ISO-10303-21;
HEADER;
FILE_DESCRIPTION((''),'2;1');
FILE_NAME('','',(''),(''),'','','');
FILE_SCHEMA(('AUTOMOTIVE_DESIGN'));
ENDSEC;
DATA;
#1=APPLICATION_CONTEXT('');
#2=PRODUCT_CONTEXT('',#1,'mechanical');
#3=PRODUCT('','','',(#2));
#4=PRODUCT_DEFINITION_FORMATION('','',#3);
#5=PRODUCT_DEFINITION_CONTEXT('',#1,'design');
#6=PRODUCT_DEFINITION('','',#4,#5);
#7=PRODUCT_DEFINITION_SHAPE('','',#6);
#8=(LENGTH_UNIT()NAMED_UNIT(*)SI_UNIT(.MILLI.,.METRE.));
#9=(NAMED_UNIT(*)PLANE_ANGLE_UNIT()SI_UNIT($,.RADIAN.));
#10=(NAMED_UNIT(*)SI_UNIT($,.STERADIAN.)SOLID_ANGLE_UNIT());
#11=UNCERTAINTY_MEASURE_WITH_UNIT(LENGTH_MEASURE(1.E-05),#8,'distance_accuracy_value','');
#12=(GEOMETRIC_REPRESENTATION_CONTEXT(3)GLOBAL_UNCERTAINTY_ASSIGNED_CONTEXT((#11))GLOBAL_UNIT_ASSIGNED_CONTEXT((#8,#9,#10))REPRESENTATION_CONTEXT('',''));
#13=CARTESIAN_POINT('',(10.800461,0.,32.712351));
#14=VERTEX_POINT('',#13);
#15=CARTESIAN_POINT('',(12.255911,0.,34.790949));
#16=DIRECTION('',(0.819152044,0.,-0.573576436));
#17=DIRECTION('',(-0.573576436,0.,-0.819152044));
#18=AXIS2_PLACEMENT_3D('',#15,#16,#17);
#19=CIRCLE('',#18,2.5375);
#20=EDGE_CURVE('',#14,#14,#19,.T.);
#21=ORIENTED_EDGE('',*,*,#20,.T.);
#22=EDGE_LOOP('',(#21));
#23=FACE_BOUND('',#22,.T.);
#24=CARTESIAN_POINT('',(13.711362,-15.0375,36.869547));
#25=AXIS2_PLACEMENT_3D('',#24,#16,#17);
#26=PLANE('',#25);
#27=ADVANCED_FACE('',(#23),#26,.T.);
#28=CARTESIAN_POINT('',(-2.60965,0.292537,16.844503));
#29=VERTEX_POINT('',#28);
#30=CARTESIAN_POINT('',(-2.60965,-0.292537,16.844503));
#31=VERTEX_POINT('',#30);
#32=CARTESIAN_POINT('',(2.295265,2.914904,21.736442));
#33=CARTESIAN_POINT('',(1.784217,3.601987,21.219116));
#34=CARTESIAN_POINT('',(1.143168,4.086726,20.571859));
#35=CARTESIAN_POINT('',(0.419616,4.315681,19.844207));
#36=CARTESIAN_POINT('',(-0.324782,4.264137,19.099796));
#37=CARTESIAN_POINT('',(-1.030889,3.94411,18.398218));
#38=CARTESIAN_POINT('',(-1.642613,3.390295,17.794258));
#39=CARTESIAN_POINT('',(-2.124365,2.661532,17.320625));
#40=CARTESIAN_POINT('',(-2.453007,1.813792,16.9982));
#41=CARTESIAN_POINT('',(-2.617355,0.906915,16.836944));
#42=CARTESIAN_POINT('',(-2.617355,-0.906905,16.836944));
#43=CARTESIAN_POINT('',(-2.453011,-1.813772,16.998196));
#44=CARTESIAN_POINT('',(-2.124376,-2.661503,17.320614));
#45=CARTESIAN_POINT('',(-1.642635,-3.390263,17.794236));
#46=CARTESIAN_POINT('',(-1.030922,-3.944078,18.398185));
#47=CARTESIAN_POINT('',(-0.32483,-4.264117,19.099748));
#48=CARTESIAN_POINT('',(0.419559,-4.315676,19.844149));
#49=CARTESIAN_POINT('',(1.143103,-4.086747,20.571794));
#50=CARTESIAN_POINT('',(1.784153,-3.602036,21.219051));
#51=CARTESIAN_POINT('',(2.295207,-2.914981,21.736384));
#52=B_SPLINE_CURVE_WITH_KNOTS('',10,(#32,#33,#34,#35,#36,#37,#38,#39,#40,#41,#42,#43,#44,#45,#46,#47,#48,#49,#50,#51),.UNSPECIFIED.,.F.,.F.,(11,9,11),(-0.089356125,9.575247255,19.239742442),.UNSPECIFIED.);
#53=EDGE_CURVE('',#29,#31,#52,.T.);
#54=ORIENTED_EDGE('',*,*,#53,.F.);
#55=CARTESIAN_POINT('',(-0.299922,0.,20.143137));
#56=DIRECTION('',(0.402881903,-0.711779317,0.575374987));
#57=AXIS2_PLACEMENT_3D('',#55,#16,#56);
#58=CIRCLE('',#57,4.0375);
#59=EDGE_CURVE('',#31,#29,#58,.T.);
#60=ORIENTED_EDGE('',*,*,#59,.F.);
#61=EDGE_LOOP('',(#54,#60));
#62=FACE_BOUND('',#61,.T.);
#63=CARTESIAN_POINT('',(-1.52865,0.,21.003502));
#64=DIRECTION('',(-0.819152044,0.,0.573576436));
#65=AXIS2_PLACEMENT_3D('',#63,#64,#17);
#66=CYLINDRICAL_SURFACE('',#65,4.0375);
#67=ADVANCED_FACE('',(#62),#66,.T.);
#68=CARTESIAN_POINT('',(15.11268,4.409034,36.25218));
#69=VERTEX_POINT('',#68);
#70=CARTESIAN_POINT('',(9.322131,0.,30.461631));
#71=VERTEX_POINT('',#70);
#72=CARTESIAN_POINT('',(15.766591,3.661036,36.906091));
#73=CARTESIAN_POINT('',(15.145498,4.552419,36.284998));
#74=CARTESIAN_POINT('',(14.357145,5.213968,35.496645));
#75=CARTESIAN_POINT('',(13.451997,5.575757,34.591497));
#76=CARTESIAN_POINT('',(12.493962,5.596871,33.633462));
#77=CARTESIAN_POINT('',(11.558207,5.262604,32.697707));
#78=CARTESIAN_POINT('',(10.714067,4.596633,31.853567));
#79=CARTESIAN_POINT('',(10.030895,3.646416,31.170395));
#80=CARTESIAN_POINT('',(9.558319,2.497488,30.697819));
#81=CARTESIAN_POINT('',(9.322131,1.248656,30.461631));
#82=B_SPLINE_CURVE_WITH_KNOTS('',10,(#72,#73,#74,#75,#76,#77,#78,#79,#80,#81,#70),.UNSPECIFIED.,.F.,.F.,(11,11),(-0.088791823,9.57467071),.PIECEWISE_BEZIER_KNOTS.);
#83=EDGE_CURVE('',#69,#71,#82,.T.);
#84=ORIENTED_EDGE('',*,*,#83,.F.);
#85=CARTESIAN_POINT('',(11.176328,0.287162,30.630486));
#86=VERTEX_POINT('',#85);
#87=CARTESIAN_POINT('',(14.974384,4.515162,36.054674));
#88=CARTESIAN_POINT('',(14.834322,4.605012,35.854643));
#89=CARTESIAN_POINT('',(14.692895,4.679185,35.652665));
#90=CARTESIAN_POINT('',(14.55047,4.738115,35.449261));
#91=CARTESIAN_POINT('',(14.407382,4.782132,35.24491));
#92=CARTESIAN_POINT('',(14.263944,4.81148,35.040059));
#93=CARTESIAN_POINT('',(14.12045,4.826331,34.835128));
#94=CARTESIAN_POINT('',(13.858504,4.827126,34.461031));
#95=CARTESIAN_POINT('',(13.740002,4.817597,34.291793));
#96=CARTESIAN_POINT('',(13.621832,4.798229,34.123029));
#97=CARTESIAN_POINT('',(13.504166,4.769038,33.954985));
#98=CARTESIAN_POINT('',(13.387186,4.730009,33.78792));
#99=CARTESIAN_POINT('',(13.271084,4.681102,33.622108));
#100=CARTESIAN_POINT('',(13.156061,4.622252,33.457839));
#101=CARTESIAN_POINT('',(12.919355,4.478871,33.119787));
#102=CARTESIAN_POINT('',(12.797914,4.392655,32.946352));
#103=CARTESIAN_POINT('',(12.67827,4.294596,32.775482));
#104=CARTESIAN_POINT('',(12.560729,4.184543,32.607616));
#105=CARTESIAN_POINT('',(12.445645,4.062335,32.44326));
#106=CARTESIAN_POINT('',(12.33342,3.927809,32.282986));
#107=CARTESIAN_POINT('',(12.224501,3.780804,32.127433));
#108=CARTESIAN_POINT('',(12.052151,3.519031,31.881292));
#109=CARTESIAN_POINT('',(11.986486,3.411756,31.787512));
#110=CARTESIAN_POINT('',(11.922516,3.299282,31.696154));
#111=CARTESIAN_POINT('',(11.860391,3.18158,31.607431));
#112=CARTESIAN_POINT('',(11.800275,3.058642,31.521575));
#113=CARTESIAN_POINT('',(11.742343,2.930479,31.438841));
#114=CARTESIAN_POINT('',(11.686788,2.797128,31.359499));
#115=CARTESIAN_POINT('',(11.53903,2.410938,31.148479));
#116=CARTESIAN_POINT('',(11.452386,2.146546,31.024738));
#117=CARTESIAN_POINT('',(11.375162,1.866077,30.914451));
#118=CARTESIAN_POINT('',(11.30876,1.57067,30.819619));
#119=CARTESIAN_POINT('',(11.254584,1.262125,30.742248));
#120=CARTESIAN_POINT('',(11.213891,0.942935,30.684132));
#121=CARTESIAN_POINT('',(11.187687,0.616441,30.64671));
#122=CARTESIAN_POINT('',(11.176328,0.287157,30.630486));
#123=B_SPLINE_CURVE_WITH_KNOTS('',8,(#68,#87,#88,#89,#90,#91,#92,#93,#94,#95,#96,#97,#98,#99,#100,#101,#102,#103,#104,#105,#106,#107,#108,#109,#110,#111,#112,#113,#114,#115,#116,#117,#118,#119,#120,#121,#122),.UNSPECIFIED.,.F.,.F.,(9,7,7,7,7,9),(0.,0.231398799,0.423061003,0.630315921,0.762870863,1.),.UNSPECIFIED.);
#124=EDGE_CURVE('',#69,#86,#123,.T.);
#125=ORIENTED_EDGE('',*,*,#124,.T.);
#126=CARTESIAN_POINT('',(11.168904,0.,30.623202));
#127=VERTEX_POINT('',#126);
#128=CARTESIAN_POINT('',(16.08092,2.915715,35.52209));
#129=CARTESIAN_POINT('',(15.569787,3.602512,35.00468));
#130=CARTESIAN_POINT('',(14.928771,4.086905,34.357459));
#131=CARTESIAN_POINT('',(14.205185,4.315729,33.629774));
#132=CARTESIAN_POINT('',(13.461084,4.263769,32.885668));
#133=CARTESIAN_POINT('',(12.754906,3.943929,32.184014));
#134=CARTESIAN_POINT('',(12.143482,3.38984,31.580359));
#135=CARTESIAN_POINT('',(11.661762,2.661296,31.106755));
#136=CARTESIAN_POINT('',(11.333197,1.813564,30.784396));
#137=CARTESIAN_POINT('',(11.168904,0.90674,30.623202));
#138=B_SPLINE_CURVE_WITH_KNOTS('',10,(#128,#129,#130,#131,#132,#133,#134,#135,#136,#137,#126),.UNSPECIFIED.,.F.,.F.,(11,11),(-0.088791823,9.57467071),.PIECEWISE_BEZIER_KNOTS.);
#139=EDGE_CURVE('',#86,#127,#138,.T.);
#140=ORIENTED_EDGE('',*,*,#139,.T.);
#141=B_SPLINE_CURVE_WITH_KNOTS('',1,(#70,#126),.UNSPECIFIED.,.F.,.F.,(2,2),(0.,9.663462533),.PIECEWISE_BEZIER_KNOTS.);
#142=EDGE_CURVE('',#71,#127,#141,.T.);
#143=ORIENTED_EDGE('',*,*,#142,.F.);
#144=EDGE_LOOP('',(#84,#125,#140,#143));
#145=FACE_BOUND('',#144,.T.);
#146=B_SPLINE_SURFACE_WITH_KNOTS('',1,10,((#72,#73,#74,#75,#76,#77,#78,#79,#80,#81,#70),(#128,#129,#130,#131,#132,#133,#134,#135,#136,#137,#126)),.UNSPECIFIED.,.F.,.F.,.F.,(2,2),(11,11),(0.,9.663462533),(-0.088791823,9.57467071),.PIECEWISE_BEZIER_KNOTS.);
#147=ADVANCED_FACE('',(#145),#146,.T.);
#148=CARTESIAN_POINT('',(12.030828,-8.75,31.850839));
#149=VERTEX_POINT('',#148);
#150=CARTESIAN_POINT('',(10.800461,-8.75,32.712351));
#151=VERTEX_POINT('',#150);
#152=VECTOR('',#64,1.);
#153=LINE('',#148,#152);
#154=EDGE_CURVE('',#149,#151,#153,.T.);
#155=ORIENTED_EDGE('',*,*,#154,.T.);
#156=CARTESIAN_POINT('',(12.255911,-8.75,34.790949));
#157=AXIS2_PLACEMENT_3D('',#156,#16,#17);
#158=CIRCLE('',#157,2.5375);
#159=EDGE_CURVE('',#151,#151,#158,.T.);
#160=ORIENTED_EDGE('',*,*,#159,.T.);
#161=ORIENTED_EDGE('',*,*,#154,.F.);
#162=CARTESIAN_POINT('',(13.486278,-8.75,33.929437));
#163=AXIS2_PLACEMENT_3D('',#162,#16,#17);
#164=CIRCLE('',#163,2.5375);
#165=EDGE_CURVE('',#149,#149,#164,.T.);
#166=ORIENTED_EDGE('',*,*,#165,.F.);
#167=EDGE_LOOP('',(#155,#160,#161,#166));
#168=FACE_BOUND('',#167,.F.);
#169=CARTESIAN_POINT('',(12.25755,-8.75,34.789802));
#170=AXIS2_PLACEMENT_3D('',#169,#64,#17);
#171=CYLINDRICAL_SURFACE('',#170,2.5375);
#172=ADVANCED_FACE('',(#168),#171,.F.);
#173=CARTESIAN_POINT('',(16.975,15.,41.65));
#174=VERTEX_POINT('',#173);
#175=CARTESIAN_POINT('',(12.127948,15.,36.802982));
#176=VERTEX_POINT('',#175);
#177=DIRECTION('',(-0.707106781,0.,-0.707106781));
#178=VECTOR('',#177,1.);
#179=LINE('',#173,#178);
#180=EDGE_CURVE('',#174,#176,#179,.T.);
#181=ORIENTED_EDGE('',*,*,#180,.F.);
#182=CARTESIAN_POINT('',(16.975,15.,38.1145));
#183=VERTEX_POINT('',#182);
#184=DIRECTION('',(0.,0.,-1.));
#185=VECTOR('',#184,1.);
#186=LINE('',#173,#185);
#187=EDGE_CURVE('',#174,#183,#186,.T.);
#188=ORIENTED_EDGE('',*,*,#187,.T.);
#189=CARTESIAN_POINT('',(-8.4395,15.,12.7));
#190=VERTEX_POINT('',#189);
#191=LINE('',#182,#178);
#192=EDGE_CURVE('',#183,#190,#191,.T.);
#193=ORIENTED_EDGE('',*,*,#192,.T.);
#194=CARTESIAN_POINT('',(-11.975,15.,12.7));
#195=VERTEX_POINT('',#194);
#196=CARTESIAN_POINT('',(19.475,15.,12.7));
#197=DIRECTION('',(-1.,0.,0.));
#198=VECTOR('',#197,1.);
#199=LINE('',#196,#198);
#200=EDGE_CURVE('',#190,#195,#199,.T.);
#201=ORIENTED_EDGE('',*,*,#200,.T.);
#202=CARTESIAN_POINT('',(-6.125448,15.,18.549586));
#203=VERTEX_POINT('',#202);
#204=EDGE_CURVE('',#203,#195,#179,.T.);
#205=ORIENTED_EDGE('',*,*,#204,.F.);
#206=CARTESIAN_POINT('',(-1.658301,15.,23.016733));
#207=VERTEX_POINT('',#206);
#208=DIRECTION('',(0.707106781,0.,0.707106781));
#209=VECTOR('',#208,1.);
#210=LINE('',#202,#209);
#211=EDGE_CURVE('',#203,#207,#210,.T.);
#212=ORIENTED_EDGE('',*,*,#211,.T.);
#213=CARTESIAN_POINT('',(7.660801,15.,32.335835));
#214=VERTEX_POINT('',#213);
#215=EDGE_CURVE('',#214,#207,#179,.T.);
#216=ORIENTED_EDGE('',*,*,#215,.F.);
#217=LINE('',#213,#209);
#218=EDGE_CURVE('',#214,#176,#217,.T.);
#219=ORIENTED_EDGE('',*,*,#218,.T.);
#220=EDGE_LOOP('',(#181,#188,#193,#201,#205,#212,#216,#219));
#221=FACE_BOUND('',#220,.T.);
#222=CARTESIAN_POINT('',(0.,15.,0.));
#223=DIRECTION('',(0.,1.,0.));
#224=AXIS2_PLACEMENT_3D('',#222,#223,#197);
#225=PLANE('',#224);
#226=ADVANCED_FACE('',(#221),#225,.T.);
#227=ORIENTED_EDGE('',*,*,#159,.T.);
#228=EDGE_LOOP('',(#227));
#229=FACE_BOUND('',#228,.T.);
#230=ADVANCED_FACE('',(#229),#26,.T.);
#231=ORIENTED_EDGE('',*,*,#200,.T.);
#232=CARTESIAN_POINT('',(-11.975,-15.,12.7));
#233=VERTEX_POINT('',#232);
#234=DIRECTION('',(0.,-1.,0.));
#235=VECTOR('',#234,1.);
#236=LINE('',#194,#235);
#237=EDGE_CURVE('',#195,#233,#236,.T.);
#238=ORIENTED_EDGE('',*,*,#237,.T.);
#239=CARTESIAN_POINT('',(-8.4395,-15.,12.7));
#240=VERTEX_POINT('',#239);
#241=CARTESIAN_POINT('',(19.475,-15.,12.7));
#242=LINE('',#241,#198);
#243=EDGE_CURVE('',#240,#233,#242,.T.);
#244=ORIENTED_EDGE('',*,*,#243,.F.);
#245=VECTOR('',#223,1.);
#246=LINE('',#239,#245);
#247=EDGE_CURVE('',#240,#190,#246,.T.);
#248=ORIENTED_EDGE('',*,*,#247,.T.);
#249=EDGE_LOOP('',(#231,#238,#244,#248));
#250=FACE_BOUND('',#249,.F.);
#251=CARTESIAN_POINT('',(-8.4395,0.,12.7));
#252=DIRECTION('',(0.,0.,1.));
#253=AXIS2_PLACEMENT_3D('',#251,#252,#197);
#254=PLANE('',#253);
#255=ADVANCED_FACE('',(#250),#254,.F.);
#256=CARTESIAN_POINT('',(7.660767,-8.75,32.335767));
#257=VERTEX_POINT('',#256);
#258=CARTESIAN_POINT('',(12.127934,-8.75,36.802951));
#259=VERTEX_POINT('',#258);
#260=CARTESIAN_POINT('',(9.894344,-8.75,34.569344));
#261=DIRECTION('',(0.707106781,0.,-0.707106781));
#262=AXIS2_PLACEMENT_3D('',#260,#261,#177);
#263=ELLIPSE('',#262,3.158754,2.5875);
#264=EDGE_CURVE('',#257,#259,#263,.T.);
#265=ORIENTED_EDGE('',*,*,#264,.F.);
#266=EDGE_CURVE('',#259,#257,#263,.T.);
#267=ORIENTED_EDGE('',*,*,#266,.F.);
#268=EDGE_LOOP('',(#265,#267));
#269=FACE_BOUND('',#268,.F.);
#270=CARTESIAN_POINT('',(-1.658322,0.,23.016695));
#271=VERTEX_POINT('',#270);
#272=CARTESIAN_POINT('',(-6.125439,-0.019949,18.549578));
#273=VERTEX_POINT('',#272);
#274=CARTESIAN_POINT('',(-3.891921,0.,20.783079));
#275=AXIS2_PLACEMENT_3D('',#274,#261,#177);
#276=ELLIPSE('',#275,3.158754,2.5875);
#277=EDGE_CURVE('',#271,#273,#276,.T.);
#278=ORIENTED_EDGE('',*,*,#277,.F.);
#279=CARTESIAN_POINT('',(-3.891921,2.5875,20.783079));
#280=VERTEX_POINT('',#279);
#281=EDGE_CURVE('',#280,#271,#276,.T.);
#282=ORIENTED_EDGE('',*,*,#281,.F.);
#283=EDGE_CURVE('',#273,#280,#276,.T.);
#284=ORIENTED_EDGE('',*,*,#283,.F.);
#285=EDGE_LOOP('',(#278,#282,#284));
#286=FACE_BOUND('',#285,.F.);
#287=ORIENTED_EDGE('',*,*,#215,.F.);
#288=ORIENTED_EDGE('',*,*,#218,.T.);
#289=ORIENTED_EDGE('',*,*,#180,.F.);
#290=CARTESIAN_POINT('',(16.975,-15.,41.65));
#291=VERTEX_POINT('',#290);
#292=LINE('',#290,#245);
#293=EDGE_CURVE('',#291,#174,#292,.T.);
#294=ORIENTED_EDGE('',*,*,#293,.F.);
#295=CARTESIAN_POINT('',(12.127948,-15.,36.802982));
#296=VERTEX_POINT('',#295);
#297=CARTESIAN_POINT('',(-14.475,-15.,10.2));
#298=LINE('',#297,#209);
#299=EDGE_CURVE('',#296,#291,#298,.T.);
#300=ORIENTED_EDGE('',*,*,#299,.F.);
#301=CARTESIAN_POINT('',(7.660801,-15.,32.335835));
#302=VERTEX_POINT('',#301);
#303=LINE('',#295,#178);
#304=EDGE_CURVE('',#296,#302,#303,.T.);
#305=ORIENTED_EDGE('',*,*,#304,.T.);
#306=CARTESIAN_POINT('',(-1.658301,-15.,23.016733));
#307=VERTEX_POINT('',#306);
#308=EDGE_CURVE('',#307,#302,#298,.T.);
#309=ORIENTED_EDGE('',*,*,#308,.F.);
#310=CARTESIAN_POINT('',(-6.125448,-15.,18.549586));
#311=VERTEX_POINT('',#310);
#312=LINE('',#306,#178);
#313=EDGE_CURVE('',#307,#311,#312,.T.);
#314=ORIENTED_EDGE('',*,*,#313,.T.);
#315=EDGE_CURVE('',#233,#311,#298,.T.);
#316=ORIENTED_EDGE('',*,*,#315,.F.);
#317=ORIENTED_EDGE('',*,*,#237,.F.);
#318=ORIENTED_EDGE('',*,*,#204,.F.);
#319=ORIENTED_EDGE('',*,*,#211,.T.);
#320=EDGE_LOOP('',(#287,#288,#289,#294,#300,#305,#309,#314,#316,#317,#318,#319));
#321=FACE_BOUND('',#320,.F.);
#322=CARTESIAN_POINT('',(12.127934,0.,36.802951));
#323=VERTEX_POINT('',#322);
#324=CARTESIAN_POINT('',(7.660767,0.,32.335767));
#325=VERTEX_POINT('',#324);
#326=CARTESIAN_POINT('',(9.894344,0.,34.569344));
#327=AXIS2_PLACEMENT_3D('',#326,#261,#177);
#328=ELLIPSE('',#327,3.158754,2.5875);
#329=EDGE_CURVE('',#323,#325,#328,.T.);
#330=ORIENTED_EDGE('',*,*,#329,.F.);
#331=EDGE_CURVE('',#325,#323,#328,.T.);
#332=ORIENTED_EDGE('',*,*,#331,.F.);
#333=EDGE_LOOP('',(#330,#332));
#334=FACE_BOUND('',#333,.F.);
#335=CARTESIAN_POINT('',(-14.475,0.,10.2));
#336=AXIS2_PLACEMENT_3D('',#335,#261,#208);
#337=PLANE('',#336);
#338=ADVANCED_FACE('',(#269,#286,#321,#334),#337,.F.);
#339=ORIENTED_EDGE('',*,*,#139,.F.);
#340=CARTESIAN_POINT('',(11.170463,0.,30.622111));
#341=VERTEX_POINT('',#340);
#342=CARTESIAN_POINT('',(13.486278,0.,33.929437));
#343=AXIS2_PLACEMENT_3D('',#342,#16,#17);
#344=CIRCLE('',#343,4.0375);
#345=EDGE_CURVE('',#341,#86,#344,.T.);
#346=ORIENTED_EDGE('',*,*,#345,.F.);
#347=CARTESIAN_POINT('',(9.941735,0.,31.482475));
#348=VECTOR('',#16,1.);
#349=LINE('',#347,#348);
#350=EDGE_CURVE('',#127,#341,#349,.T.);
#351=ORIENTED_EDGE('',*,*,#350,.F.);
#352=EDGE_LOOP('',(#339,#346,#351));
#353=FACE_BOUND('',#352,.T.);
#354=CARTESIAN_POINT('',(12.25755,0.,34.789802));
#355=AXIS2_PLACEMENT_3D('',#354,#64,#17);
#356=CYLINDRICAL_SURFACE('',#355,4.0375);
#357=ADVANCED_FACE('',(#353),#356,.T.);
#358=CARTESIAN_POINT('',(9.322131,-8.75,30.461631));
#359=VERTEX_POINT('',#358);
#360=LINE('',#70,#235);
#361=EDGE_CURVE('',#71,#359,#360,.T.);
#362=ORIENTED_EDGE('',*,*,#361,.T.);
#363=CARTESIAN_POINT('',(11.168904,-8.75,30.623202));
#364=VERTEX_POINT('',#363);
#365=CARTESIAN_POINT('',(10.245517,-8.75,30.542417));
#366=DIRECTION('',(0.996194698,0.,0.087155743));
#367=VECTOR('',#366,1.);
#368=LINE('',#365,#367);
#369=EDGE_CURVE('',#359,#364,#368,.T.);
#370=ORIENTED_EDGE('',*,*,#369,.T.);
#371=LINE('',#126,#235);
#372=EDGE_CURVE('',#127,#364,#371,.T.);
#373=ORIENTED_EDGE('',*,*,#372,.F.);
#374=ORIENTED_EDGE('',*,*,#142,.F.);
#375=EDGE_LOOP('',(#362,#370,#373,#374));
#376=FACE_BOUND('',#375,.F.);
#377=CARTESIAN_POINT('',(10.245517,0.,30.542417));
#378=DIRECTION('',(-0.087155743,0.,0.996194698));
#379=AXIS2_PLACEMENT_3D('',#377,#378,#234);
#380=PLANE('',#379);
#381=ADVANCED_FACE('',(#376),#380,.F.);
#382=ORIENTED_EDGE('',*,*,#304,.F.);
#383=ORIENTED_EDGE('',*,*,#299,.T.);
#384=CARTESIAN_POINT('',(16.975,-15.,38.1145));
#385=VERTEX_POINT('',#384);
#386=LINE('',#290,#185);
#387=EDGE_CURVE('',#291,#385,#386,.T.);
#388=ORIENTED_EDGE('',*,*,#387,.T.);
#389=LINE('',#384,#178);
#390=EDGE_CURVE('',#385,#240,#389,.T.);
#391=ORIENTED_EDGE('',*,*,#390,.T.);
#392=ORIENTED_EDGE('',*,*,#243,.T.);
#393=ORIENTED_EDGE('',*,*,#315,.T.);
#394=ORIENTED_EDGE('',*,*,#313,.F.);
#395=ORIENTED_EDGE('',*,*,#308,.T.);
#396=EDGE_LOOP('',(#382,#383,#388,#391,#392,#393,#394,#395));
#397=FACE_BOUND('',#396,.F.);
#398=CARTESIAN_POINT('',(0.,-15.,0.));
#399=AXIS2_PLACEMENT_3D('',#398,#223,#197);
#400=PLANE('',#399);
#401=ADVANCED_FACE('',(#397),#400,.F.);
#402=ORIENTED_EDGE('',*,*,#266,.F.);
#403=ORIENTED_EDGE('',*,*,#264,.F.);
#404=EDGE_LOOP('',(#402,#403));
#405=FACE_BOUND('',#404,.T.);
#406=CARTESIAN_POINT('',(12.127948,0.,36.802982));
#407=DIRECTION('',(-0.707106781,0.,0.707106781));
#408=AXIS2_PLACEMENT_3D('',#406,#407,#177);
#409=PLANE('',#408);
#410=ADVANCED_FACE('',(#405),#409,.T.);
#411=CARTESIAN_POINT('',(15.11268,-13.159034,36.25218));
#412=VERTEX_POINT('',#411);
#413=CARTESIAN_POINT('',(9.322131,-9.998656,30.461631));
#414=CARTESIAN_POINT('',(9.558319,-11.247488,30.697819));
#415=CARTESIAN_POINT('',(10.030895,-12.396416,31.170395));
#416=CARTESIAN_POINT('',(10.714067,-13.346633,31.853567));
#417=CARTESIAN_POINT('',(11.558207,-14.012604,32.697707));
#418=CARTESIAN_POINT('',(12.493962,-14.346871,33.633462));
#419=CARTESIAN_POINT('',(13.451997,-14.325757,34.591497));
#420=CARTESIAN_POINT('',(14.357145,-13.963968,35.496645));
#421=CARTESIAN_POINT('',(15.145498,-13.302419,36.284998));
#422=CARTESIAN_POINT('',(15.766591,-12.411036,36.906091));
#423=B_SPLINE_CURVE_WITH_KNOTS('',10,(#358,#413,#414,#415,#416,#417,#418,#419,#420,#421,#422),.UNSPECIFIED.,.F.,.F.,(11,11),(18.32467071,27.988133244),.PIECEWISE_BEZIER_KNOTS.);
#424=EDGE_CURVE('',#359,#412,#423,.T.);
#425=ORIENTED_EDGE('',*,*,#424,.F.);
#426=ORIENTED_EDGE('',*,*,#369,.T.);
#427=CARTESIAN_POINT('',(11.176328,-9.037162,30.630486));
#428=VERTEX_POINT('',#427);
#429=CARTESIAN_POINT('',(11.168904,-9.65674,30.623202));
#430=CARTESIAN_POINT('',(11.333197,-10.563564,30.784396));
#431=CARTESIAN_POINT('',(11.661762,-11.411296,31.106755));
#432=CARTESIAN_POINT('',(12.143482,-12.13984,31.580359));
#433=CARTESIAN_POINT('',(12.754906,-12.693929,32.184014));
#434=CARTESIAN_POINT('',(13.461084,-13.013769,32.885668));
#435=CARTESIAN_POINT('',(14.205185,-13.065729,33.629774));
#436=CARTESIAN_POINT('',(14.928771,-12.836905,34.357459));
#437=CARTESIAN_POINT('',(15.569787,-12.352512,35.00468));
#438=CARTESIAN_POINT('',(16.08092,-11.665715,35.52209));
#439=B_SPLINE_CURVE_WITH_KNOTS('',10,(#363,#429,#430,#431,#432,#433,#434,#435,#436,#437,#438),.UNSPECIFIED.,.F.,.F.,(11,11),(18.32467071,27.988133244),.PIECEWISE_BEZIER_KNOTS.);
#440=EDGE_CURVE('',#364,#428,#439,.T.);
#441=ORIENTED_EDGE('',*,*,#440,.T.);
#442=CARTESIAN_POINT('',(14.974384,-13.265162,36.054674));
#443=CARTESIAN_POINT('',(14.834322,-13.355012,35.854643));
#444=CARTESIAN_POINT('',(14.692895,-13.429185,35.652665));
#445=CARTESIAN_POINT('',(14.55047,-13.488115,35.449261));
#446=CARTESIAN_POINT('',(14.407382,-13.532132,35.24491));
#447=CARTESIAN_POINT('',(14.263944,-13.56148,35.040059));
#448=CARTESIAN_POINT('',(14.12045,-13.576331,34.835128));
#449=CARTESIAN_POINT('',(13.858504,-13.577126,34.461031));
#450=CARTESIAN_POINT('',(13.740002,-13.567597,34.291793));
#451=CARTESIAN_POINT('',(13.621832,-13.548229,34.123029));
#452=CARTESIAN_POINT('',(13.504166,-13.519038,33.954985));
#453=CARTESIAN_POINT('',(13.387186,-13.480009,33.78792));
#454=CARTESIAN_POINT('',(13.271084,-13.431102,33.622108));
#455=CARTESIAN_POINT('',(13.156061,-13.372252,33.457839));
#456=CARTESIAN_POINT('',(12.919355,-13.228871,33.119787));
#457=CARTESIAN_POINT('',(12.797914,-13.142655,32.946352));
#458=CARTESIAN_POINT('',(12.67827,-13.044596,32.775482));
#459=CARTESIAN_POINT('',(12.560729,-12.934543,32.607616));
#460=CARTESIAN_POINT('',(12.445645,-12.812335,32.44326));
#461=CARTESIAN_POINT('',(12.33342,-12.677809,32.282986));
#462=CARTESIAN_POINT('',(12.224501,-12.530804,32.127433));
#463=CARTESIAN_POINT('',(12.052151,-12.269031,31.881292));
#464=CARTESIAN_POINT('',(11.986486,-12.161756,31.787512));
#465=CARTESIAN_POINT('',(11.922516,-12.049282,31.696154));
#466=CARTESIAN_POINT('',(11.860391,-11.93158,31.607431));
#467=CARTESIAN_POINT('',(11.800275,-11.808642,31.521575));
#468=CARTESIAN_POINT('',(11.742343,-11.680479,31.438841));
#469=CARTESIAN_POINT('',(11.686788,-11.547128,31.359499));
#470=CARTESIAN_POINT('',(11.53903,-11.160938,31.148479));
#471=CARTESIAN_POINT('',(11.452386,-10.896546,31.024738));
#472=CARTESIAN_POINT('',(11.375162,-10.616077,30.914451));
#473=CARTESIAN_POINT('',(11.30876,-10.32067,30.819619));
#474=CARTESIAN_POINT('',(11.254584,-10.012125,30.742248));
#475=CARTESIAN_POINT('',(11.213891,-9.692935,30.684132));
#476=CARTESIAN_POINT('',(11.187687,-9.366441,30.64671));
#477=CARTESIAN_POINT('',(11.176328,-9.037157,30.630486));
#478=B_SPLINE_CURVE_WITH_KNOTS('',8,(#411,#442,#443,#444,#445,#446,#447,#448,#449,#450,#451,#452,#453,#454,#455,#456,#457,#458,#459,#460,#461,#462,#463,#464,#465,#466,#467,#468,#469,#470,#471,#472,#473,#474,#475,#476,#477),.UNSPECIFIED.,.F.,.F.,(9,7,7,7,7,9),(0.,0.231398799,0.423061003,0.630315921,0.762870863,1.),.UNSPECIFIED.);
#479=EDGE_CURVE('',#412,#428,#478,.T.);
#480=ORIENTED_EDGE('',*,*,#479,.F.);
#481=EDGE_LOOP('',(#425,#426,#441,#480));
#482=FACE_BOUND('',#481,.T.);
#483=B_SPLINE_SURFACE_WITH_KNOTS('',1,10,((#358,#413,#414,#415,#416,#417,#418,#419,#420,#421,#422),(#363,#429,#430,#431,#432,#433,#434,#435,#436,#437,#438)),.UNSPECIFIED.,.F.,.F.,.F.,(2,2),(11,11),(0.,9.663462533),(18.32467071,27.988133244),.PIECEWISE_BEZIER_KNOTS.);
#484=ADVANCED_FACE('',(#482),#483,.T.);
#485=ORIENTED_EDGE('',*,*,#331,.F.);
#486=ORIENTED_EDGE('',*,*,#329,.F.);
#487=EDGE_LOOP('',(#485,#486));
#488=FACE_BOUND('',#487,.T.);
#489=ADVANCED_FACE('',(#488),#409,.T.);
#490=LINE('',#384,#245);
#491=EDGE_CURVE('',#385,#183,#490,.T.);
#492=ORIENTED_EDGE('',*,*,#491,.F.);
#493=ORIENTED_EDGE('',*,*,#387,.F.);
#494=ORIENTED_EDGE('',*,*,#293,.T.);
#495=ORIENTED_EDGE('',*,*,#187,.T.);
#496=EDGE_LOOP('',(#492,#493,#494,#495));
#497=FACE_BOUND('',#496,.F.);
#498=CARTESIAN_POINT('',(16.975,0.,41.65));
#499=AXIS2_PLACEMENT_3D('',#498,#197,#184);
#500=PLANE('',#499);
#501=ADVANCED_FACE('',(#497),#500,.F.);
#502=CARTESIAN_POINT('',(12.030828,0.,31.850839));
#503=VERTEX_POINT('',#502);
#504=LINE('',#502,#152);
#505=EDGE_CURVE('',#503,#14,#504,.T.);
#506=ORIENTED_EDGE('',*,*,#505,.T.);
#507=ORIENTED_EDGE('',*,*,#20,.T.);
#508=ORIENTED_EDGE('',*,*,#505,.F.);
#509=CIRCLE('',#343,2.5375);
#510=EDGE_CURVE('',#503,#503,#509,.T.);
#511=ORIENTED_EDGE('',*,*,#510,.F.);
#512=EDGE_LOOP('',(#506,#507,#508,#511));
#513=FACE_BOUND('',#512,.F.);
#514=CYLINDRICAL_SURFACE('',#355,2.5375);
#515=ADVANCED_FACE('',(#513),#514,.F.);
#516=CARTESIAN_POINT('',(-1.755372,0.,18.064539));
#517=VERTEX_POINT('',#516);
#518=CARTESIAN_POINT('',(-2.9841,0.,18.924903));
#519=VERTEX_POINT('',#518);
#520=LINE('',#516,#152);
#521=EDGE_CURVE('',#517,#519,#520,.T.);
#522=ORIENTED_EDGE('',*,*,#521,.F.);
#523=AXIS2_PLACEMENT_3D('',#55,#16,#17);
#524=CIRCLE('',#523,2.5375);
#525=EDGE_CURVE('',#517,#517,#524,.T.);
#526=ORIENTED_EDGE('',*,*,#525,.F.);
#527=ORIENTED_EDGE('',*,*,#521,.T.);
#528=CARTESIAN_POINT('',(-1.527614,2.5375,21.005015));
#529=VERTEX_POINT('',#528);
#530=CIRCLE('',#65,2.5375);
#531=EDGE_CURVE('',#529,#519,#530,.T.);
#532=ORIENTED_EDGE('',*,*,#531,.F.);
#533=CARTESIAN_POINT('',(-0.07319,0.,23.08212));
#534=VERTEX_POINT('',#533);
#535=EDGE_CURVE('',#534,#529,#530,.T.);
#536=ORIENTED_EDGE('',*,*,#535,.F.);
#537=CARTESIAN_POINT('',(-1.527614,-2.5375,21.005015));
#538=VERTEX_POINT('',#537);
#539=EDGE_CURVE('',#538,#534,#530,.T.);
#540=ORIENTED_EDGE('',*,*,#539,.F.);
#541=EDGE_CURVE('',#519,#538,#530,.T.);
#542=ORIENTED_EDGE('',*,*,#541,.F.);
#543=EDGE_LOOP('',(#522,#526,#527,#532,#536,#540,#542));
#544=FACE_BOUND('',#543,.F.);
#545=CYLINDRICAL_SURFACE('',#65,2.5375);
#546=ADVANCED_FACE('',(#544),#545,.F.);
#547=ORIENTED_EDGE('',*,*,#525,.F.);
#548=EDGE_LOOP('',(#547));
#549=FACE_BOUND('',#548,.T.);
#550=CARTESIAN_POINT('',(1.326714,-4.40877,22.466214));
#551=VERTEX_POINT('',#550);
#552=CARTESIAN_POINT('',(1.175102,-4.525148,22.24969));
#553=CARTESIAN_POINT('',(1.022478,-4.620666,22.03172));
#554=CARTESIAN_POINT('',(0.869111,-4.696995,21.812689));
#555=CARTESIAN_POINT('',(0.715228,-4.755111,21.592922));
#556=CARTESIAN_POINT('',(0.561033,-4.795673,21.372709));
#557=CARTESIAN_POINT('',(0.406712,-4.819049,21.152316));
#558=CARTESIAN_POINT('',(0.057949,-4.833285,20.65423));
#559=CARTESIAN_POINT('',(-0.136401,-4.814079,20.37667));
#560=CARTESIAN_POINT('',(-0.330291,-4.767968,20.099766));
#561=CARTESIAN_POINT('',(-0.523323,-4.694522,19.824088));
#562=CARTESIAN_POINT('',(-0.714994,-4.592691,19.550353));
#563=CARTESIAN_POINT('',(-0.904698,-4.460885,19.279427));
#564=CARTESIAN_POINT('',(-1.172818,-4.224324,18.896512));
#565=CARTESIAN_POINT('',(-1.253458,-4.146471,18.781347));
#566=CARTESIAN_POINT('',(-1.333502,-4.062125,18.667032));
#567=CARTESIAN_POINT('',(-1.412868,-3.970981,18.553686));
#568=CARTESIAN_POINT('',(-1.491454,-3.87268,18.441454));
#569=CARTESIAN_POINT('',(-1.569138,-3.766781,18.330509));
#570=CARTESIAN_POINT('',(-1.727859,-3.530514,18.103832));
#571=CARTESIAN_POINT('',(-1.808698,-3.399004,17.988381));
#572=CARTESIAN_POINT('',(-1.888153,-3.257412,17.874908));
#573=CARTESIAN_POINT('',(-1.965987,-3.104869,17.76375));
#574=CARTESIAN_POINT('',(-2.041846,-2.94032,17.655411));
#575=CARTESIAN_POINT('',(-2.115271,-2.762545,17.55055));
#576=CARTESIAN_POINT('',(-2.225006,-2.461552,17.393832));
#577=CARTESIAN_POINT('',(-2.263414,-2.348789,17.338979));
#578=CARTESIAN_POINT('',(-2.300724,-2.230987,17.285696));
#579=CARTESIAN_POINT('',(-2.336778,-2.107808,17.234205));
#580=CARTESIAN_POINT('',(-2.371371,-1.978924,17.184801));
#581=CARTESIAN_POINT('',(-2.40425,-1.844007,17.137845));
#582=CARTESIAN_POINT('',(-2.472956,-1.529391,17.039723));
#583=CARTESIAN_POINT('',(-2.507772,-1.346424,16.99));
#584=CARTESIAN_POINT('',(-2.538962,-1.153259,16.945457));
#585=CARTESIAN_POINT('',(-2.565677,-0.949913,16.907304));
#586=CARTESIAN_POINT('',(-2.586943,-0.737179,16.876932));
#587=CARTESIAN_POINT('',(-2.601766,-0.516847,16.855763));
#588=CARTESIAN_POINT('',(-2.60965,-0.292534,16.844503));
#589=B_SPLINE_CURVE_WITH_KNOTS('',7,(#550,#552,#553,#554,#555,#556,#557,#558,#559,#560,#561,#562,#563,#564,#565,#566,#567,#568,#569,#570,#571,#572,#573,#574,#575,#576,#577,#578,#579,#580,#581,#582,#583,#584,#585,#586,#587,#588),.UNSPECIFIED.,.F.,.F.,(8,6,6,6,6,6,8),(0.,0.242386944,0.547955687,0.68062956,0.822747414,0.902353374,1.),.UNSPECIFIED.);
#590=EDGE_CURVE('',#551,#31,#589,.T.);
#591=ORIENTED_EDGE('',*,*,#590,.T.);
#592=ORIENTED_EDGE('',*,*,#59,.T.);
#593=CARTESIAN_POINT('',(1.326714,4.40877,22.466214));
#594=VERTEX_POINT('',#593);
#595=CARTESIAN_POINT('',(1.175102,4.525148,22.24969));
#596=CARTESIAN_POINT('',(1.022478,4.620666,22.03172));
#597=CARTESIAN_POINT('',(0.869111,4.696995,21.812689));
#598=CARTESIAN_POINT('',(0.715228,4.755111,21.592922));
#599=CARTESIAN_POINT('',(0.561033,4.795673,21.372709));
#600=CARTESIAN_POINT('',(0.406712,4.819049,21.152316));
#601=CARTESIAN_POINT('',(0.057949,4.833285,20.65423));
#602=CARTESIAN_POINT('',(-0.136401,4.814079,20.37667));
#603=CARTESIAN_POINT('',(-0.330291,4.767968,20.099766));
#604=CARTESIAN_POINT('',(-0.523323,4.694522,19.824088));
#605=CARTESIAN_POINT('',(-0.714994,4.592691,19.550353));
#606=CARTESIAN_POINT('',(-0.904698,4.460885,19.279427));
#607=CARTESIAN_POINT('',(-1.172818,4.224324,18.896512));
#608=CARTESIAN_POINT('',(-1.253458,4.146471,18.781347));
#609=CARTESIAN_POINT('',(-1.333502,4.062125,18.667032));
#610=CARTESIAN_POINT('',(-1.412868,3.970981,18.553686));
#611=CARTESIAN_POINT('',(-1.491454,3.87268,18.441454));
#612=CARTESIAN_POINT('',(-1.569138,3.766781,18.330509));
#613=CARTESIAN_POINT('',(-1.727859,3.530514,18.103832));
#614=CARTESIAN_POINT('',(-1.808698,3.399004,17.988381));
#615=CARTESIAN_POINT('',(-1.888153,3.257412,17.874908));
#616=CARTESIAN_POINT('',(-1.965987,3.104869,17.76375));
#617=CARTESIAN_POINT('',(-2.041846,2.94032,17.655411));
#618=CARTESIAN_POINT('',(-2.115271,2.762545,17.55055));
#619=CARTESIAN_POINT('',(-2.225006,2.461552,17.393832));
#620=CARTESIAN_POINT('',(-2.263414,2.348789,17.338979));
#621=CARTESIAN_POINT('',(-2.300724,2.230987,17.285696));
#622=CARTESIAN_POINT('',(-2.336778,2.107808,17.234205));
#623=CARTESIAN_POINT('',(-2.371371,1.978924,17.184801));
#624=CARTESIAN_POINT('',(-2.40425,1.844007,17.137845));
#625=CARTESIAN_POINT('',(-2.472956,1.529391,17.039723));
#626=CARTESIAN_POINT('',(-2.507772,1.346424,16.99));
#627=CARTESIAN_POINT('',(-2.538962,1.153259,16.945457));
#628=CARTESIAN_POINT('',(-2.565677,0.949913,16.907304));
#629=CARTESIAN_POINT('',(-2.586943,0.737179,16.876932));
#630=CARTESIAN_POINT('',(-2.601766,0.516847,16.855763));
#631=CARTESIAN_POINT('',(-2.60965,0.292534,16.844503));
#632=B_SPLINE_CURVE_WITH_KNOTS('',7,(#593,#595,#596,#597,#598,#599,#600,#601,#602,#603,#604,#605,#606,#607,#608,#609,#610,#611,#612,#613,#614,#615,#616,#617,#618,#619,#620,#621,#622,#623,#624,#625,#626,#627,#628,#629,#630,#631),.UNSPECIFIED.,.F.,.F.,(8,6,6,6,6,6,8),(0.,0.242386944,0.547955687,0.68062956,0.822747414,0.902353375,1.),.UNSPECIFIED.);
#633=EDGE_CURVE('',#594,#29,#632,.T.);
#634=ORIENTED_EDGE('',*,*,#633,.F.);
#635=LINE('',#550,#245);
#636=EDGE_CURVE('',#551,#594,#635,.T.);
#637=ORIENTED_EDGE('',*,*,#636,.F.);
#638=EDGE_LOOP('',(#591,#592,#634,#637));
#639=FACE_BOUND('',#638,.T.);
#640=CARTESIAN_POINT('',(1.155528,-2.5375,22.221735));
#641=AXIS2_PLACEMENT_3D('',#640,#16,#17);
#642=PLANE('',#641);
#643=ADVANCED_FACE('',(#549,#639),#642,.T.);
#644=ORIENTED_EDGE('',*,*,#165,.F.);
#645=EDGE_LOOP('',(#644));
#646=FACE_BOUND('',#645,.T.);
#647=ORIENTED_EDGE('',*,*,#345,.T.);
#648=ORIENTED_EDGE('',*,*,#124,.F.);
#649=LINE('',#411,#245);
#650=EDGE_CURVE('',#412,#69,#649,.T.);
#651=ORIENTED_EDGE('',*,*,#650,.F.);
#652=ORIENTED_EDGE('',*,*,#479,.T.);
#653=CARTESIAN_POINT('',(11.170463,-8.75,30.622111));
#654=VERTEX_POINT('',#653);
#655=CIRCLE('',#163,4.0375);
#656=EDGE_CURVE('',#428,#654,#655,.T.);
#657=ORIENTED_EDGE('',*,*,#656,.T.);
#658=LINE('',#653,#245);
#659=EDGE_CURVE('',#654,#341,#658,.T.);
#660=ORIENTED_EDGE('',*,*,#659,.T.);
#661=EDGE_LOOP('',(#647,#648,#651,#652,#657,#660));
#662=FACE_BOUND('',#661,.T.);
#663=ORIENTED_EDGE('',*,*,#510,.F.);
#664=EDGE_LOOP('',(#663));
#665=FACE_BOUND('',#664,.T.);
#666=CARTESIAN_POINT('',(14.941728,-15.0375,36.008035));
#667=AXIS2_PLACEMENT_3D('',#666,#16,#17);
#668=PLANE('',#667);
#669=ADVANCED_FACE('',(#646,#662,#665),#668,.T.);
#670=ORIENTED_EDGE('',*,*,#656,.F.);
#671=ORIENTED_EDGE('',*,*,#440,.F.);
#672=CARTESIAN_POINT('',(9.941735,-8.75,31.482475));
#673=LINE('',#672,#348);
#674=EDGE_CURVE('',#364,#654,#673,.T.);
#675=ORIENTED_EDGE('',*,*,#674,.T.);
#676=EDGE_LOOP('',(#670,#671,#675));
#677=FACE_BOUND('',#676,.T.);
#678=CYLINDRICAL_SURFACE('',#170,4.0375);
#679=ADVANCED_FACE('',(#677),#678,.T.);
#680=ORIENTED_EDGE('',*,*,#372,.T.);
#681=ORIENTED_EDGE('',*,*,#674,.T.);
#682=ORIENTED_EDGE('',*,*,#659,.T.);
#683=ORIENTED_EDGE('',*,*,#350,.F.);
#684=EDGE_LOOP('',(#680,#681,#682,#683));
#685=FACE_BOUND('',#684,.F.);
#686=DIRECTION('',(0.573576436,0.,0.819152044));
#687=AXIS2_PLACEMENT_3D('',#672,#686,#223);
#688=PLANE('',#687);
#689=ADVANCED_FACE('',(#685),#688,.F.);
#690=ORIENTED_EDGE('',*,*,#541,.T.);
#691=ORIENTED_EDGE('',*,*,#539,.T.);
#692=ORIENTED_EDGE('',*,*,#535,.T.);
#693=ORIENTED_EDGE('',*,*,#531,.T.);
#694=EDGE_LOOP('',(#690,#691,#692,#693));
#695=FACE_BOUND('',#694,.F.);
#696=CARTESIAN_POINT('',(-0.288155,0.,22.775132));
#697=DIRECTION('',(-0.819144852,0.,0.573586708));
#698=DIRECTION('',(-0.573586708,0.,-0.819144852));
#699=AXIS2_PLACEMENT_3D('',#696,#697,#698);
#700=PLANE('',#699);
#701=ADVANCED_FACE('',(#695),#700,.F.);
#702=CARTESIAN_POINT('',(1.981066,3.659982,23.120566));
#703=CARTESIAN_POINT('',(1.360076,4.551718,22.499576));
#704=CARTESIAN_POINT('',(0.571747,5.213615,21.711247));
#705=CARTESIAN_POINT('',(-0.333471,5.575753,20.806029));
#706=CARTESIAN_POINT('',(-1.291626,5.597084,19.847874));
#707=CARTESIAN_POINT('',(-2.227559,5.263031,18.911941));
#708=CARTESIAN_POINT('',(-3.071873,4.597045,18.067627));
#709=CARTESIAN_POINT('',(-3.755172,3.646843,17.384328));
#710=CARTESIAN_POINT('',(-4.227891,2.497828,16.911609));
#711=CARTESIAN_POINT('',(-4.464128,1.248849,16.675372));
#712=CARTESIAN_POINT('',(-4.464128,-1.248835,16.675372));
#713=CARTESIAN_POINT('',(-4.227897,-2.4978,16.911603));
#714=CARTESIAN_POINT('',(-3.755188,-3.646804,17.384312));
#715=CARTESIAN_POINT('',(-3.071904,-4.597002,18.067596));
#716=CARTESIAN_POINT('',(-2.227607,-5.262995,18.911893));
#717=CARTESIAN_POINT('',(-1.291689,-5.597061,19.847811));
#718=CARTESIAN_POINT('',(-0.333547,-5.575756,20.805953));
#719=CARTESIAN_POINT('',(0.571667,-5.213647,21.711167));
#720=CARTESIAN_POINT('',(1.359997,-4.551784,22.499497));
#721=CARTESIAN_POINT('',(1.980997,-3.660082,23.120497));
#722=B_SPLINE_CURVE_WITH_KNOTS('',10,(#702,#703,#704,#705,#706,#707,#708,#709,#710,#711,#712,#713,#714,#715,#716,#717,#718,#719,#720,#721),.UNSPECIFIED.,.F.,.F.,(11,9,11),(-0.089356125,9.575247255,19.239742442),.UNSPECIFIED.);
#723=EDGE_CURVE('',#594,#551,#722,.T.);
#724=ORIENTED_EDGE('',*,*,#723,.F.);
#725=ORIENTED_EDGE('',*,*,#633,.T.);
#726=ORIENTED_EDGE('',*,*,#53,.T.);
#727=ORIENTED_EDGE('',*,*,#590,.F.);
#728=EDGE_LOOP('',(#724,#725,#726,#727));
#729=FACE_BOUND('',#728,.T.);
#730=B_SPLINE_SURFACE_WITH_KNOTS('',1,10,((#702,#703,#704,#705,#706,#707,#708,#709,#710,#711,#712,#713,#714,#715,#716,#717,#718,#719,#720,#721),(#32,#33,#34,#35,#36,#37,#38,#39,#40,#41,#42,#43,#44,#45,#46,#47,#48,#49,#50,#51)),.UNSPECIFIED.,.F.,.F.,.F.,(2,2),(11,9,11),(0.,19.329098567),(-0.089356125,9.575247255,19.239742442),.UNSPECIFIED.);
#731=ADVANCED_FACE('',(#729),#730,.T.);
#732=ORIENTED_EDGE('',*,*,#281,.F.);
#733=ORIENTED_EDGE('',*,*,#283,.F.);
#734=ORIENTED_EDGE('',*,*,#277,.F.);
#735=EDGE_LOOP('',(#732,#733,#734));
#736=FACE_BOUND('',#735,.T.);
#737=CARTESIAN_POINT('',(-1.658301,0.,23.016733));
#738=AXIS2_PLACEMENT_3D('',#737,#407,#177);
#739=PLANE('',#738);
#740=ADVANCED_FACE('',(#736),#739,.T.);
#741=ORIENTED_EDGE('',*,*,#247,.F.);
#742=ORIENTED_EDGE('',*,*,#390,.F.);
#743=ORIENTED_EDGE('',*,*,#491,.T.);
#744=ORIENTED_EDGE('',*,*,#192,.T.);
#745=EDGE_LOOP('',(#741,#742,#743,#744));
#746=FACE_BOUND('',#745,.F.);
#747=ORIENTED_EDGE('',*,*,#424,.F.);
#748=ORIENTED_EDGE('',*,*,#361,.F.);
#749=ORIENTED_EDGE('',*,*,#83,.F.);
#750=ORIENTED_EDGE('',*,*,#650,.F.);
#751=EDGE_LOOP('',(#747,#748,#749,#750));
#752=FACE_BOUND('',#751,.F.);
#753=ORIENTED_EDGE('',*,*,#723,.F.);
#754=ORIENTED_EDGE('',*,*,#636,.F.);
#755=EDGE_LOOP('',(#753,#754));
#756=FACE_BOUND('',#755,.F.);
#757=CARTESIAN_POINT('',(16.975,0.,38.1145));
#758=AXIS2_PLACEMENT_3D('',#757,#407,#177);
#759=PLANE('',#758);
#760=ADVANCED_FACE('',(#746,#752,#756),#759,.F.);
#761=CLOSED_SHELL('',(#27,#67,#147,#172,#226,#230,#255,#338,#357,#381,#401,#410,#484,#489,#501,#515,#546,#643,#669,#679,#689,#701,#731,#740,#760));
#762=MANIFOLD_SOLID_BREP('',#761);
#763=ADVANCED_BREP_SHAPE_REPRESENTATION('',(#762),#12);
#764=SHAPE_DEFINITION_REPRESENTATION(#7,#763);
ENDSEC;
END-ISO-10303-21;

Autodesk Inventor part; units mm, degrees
ref_plane "YZ Plane" through (0, 0, 0) normal (1, 0, 0) x (0, 1, 0)
ref_plane "Work Plane1" through (-24.9, -24.9, 7.7) normal (0, 0, 1) x (1, 0, 0)
sketch "Sketch1" plane through (0, 0, 0) normal (0, 0, 1) x (0, 1, 0)
  circle A0 centre (20.9, 10) radius 1.875 projected
  circle A1 centre (-20.9, 10) radius 1.875 projected
  circle A2 centre (20.9, -10) radius 1.875 projected
  circle A3 centre (-20.9, -10) radius 1.875 projected
  circle A4 centre (-14.4, -20.8) radius 2.0675 projected
  circle A5 centre (14.4, -20.8) radius 2.0675 projected
  circle A6 centre (14.4, 20.8) radius 2.0675 projected
  circle A7 centre (-14.4, 20.8) radius 2.0675 projected
  line L0 (-16.9, -16.9) -> (-16.9, 16.9) projected
  line L1 (-16.9, 16.9) -> (16.9, 16.9) projected
  line L2 (16.9, 16.9) -> (16.9, -16.9) projected
  line L3 (16.9, -16.9) -> (-16.9, -16.9) projected
  line L4 (24.9, 17.05) -> (22.55, 17.05) projected
  line L5 (22.55, 17.05) -> (17.05, 22.55) projected
  line L6 (17.05, 22.55) -> (17.05, 24.9) projected
  line L7 (17.05, 24.9) -> (-17.05, 24.9) projected
  line L8 (-17.05, 24.9) -> (-17.05, 22.55) projected
  line L9 (-17.05, 22.55) -> (-22.55, 17.05) projected
  line L10 (-22.55, 17.05) -> (-24.9, 17.05) projected
  line L11 (-24.9, 17.05) -> (-24.9, -17.05) projected
  line L12 (-24.9, -17.05) -> (-22.55, -17.05) projected
  line L13 (-22.55, -17.05) -> (-17.05, -22.55) projected
  line L14 (-17.05, -22.55) -> (-17.05, -24.9) projected
  line L15 (-17.05, -24.9) -> (17.05, -24.9) projected
  line L16 (17.05, -24.9) -> (17.05, -22.55) projected
  line L17 (17.05, -22.55) -> (22.55, -17.05) projected
  line L18 (22.55, -17.05) -> (24.9, -17.05) projected
  line L19 (24.9, -17.05) -> (24.9, 17.05) projected
  line L20 (16.975, -24.825) -> (-16.975, -24.825)
  line L21 (-16.975, -24.825) -> (-16.975, -22.5189)
  line L22 (-16.975, -22.5189) -> (-22.5189, -16.975)
  line L23 (-22.5189, -16.975) -> (-24.825, -16.975)
  line L24 (-24.825, -16.975) -> (-24.825, 16.975)
  line L25 (-24.825, 16.975) -> (-22.5189, 16.975)
  line L26 (-22.5189, 16.975) -> (-16.975, 22.5189)
  line L27 (-16.975, 22.5189) -> (-16.975, 24.825)
  line L28 (-16.975, 24.825) -> (16.975, 24.825)
  line L29 (16.975, 24.825) -> (16.975, 22.5189)
  line L30 (16.975, 22.5189) -> (22.5189, 16.975)
  line L31 (22.5189, 16.975) -> (24.825, 16.975)
  line L32 (24.825, 16.975) -> (24.825, -16.975)
  line L33 (24.825, -16.975) -> (22.5189, -16.975)
  line L34 (22.5189, -16.975) -> (16.975, -22.5189)
  line L35 (16.975, -22.5189) -> (16.975, -24.825)
  dimension "d5" = 0.075
extrude "Extrusion1" add sketch "Sketch1" along normal blind 2.5 from surface at 7.7 contours A0 | A1 | A2 | A3 | A4 | A5 | A6 | A7 | L0 L1 L2 L3 | L20 L21 L22 L23 L24 L25 L26 L27 L28 L29 L30 L31 L32 L33 L34 L35
sketch "Sketch2" plane through (0, 0, 0) normal (0, 1, 0) x (-1, 0, 0)
  line L0 (16.975, 10.2) -> (-16.975, 10.2) projected
  line L1 (-16.975, 7.7) -> (-16.975, 10.2) projected
  line L2 (16.975, 7.7) -> (-16.975, 7.7) projected
  line L3 (16.975, 7.7) -> (16.975, 10.2) projected
  line L4 (16.975, 7.7) -> (-16.975, 41.65)
  line L5 (16.975, 7.7) -> (64.9876, 7.7) construction
  line L6 (-16.975, 41.65) -> (-16.975, 10.2)
  line L7 (-20.5105, 41.65) -> (10.9395, 10.2)
  line L8 (7.4039, 10.2) -> (-24.0461, 41.65)
  line L9 (-19.475, 12.7) -> (19.475, 12.7)
  line L10 (19.475, 12.7) -> (19.475, 5.2)
  line L11 (19.475, 5.2) -> (-19.475, 5.2)
  line L12 (-19.475, 5.2) -> (-19.475, 12.7)
  line L13 (-16.975, 41.65) -> (-24.825, 41.65)
  line L14 (-24.825, 41.65) -> (-24.825, 10.2)
  line L15 (-24.825, 10.2) -> (-16.975, 10.2)
  line L16 (-16.975, 10.2) -> (-16.975, 41.65)
  point P0 (0, 0)
  point P1 (14.475, 10.2)
  point P2 (-16.975, 38.1145)
  point P3 (-16.975, 34.5789)
  point P4 (8.4395, 12.7)
  point P5 (11.975, 12.7)
  point P6 (-19.475, 10.2)
  point P7 (-16.975, 12.7)
  point P8 (-16.975, 10.2)
  dimension "d6" = 135
  dimension "d9" = 2.5
  dimension "d10" = 2.5
  dimension "d13" = 2.5
extrude "Extrusion2" add sketch "Sketch2" along normal mid plane 30 contours L7 L9 L4 L0 | L0 L8 L9 L7 | L0 L6 L9 L8 | L9 L8 L6 L7 | L7 L6 L4 L9 | L15 L12 L9 L6 | L9 L6 L8 | L7 L13 L6 | L6 L8 L13 L7 | L9 L12 L15 L14 L13 L8 L6
extrude "Extrusion3" cut sketch "Sketch2" along normal mid plane 30 contours L7 L9 L4 L0 | L0 L8 L9 L7 | L9 L8 L6 L7 | L7 L13 L6 | L6 L8 L13 L7
ref_plane "Work Plane2" through (24.825, 0, 41.65) normal (0.9848078, 0, -0.1736482) x (0, 1, 0)
sketch "Sketch3" plane through (20.7643, -15, 18.6207) normal (0.9848078, 0, -0.1736482) x (-0.1736482, 0, -0.9848078)
  line L0 (10.902, 0) -> (-18.5396, 0) projected
  line L1 (10.902, 0) -> (10.902, 30) projected
  line L2 (-18.5396, 30) -> (10.902, 30) projected
  line L3 (-18.5396, 15) -> (10.902, 15)
  line L4 (6.1812, 6.25) -> (-13.8188, 6.25)
  line L5 (-13.8188, 6.25) -> (-13.8188, 23.75)
  line L6 (-13.8188, 23.75) -> (6.1812, 23.75)
  line L7 (6.1812, 23.75) -> (6.1812, 6.25)
  line L8 (6.1812, 6.25) -> (-13.8188, 23.75) construction
  line L9 (-13.8188, 6.25) -> (6.1812, 23.75) construction
  circle A0 centre (-13.8188, 6.25) radius 2.5875
  circle A1 centre (-13.8188, 6.25) radius 5.0875
  line L10 (-3.8188, 15) -> (-3.8188, 6.25)
  line L11 (-3.8188, 10.625) -> (-13.8188, 10.625)
  line L12 (-8.8188, 10.625) -> (-8.8188, 6.25)
  circle A2 centre (-13.8188, 15) radius 2.5875
  circle A3 centre (-13.8188, 15) radius 5.0875
  circle A4 centre (-3.8188, 15) radius 5.0875
  circle A5 centre (-3.8188, 15) radius 2.5875
  line L13 (-18.9063, 6.25) -> (-18.9063, 15)
  line L14 (-8.7313, 15) -> (-8.7313, 6.25)
  line L15 (-18.5396, 0) -> (-18.5396, 30) projected
  point P0 (21.9435, 15)
  dimension "d16" = 20
  dimension "d17" = 17.5
  dimension "d18" = 5.175
  dimension "d19" = 2.5
extrude "Extrusion4" cut sketch "Sketch3" along normal mid plane 50 contours A0 L5 L4 | L4 L5 A0 | A2 L3 L5 | L5 L3 A2 | A2 L5 L3 | A2 L3 L5
extrude "Extrusion5" cut sketch "Sketch3" along normal blind 4.25 and the other way blind 2.5 contours L15 A1 A3 L5 A0 L4 | A1 L15 | L13 A3 L15 A1 | L4 L12 A1 | A1 L12 L11 L14 | L15 A3 A1 | A3 L15 | L4 A0 L5 A3 A1 L12 | A1 L11 L12 | L11 A3 A4 L14 | A3 L15 L3 A2 L5 A1 | A1 L5 A3 | A3 L5 A2 L3 L15 | A4 L3 A2 L5 A3 | A3 L3 A4 | A0 L5 L4 | L4 L5 A0 | L11 L5 A1 | A3 L5 L11 | A1 L5 A2 L3 A4 A3 | A4 A3 L14 | A3 A4 L3 | A2 L3 L5 | L5 L3 A2 | A2 L5 L3 | A2 L3 L5
sketch "Sketch4" plane through (17.8921, 0, 2.3313) normal (0.9848078, 0, -0.1736482) x (0, 1, 0)
  line L0 (-15, 5.6387) -> (-15, 35.0803) projected
  line L1 (-15, 5.6387) -> (15, 5.6387) projected
  line L2 (15, 35.0803) -> (15, 5.6387) projected
  circle A0 centre (0, 14.3887) radius 2.5875
  circle A1 centre (0, 14.3887) radius 5.0875
  line L3 (-15, 35.0803) -> (15, 35.0803) projected
  line L4 (0, 5.6387) -> (0, 14.3887)
  point P0 (0, -5.1645)
  dimension "d25" = 5.175
  dimension "d26" = 2.5
  dimension "d37" = 8.75
extrude "Extrusion6" cut sketch "Sketch4" along normal mid plane 100 contours A0
extrude "Extrusion7" cut sketch "Sketch4" along normal blind 15 and the other way blind 10 contours A0 | A1
sketch "Sketch7" plane through (-3.5875, 0, 17.552) normal (0, 1, 0) x (-0.7071068, 0, -0.7071068)
  line L0 (-20.158, 0) -> (-26.4755, 0) projected
  line L1 (-0.6613, 0) -> (-6.9788, 0) projected
  line L2 (1.0892, 2.5) -> (-0.6613, 0) projected
  line L3 (-5.2283, 2.5) -> (1.0892, 2.5) projected
  line L4 (-5.2283, 2.5) -> (-6.9788, 0) projected
  line L5 (-18.4075, 2.5) -> (-20.158, 0) projected
  line L6 (-24.725, 2.5) -> (-18.4075, 2.5) projected
  line L7 (-24.725, 2.5) -> (-26.4755, 0) projected
  line L8 (-3.8201, 0) -> (-4.0701, 0)
  line L9 (-23.3168, 0) -> (-23.5668, 0)
  line L10 (-1.7448, -1.4254) -> (-6.7427, -0.5442)
  line L11 (-6.7427, -0.5442) -> (-6.3954, 1.4254)
  line L12 (-6.3954, 1.4254) -> (-1.3975, 0.5442)
  line L13 (-1.3975, 0.5442) -> (-1.7448, -1.4254)
  line L14 (-1.7448, -1.4254) -> (-6.3954, 1.4254) construction
  line L15 (-6.7427, -0.5442) -> (-1.3975, 0.5442) construction
  line L16 (-1.7448, -1.4254) -> (3.3302, -1.4254) construction
  line L17 (-21.2415, -1.4254) -> (-26.2394, -0.5442)
  line L18 (-26.2394, -0.5442) -> (-25.8921, 1.4254)
  line L19 (-25.8921, 1.4254) -> (-20.8942, 0.5442)
  line L20 (-20.8942, 0.5442) -> (-21.2415, -1.4254)
  line L21 (-21.2415, -1.4254) -> (-25.8921, 1.4254) construction
  line L22 (-26.2394, -0.5442) -> (-20.8942, 0.5442) construction
  line L23 (-21.2415, -1.4254) -> (-16.1665, -1.4254) construction
  line L24 (-27.1088, 3.1631) -> (-27.9771, -1.7609)
  line L25 (-27.9771, -1.7609) -> (-20.0247, -3.1631)
  line L26 (-20.0247, -3.1631) -> (-19.1565, 1.7609)
  line L27 (-19.1565, 1.7609) -> (-27.1088, 3.1631)
  line L28 (-7.6121, 3.1631) -> (-8.4804, -1.7609)
  line L29 (-8.4804, -1.7609) -> (-0.528, -3.1631)
  line L30 (-0.528, -3.1631) -> (0.3402, 1.7609)
  line L31 (0.3402, 1.7609) -> (-7.6121, 3.1631)
  line L32 (-0.6613, 0) -> (0.0297, 0)
  line L33 (-20.158, 0) -> (-19.467, 0)
  line L34 (-1.7448, -1.4254) -> (0.0297, 0)
  line L35 (-21.2415, -1.4254) -> (-19.467, 0)
  line L36 (-26.4755, 0) -> (-27.6666, 0)
  line L37 (-6.9788, 0) -> (-8.1699, 0)
  line L38 (-6.7427, -0.5442) -> (-8.1699, 0)
  line L39 (-26.2394, -0.5442) -> (-27.6666, 0)
  point P0 (-1.4934, 0)
  point P1 (-6.6467, 0)
  point P2 (-26.1434, 0)
  point P3 (-20.9901, 0)
  dimension "d70" = 0.25
  dimension "d71" = 0.25
  dimension "d72" = 5.075
  dimension "d73" = 170
  dimension "d74" = 2
  dimension "d75" = 5.075
  dimension "d76" = 170
  dimension "d77" = 2
  dimension "d78" = 1.5
  dimension "d79" = 1.5
extrude "Extrusion10" add sketch "Sketch7" along normal mid plane 30 contours L0 L18 L7 L19 L20 | L20 L19 L7 L6 L27 L26 L5 L0 | L0 L7 L18 | L26 L27 L6 L5 | L1 L11 L4 L12 L13 | L13 L12 L4 L3 L31 L30 L2 L1 | L1 L4 L11 | L30 L31 L3 L2
extrude "Extrusion11" cut sketch "Sketch7" along normal mid plane 5.075 contours L0 L20 L17 L18 | L0 L18 L7 L19 L20 | L18 L19 L7 | L1 L13 L10 L11 | L1 L11 L4 L12 L13 | L11 L12 L4
sketch "Sketch8" plane through (13.713, -15.0375, 36.8684) normal (0.819152, 0, -0.5735764) x (-0.5735764, 0, -0.819152)
  line L0 (0, 12.5) -> (0, 17.575) projected
  line L1 (5.075, 17.575) -> (5.075, 12.5) projected
  line L2 (0, 12.5) -> (5.075, 12.5) projected
  line L3 (5.075, 17.575) -> (0, 17.575) projected
  line L4 (2.5375, 12.5) -> (2.5375, 17.575)
  circle A0 centre (2.5375, 15.0375) radius 2.5375
  circle A1 centre (2.5375, 15.0375) radius 4.0375
  circle A2 centre (2.5375, 6.2875) radius 4.0375
  circle A3 centre (2.5375, 6.2875) radius 2.5375
  line L5 (-1.5, 6.2875) -> (-1.5, 15.0375)
  line L6 (6.575, 6.2875) -> (6.575, 15.0375)
  point P0 (38.0663, 15.0375)
  dimension "d86" = 5.075
  dimension "d87" = 1.5
  dimension "d90" = 8.75
extrude "Extrusion12" cut sketch "Sketch8" along normal blind 1.5 contours A0 L4 | L4 A0 | A3
extrude "Extrusion13" add sketch "Sketch8" along normal blind 1.5 contours L0 A0 L2 | L0 L3 A0 | A0 L1 L2 | L3 L1 A0 | A1 | L6 A2 L5 A1 | A2
sketch "Sketch9" plane through (-0.0732, -2.5375, 23.0821) normal (0.819152, 0, -0.5735764) x (-0.5735764, 0, -0.819152)
  line L0 (0, 0) -> (0, 5.075) projected
  line L1 (0, 0) -> (5.075, 0) projected
  line L2 (5.075, 5.075) -> (5.075, 0) projected
  line L3 (5.075, 5.075) -> (0, 5.075) projected
  line L4 (2.5375, 0) -> (2.5375, 5.075)
  circle A0 centre (2.5375, 2.5375) radius 2.5375
  circle A1 centre (2.5375, 2.5375) radius 4.0375
  point P0 (18.8658, 2.5375)
  dimension "d99" = 5.075
  dimension "d100" = 1.5
extrude "Extrusion14" add sketch "Sketch9" along normal blind 1.5 contours L0 A0 L1 | L0 L3 A0 | A0 L2 L1 | L3 L2 A0 | A1
chamfer "Chamfer1" distance 1.21 angle 45 3 edges at (11.9583, -12.4749, 33.0978) (-1.8279, 3.7249, 19.3115) (-1.8279, -3.7249, 19.3115)
sketch "Sketch10" plane through (0, 0, 0) normal (0, 1, 0) x (-1, 0, 0)
  line L0 (8.4395, 12.7) -> (-16.975, 38.1145) projected
  line L1 (-16.975, 38.1145) -> (-16.975, 41.65) projected
  line L2 (-16.975, 41.65) -> (11.975, 12.7) projected
  line L3 (11.975, 12.7) -> (8.4395, 12.7) projected
  line L4 (-11.1764, 30.6305) -> (-15.1128, 36.2522) projected
  line L5 (-11.1689, 30.6232) -> (-11.1764, 30.6305) projected
  line L6 (-15.1128, 36.2522) -> (-9.3221, 30.4616) projected
  line L7 (-1.3265, 22.466) -> (2.6099, 16.8443) projected
  line L8 (2.6099, 16.8443) -> (2.6099, 16.8443) projected
  line L9 (2.6099, 16.8443) -> (-1.3265, 22.466) projected
  line L10 (-1.3265, 22.466) -> (-1.3265, 22.466) projected
  line L11 (-24.0461, 41.65) -> (7.4039, 10.2) projected
  line L12 (-24.825, 10.2) -> (7.4039, 10.2) projected
  line L13 (-24.825, 10.2) -> (-24.825, 41.65) projected
  line L14 (-24.825, 41.65) -> (-24.0461, 41.65) projected
  line L15 (22.5189, 10.2) -> (24.825, 10.2) projected
  line L16 (24.825, 7.7) -> (24.825, 10.2) projected
  line L17 (22.5189, 7.7) -> (24.825, 7.7) projected
  line L18 (22.5189, 7.7) -> (22.5189, 10.2) projected
  line L19 (16.975, 10.2) -> (22.5189, 10.2) projected
  line L20 (22.5189, 7.7) -> (22.5189, 10.2) projected
  line L21 (16.975, 7.7) -> (22.5189, 7.7) projected
  line L22 (16.975, 7.7) -> (16.975, 10.2) projected
  line L23 (-16.975, 10.2) -> (16.975, 10.2) projected
  line L24 (16.975, 7.7) -> (16.975, 10.2) projected
  line L25 (-16.975, 7.7) -> (16.975, 7.7) projected
  line L26 (-16.975, 7.7) -> (-16.975, 10.2) projected
  line L27 (-22.5189, 10.2) -> (-16.975, 10.2) projected
  line L28 (-16.975, 7.7) -> (-16.975, 10.2) projected
  line L29 (-22.5189, 7.7) -> (-16.975, 7.7) projected
  line L30 (-22.5189, 7.7) -> (-22.5189, 10.2) projected
  line L31 (-24.825, 10.2) -> (-22.5189, 10.2) projected
  line L32 (-22.5189, 7.7) -> (-22.5189, 10.2) projected
  line L33 (-24.825, 7.7) -> (-22.5189, 7.7) projected
  line L34 (-24.825, 7.7) -> (-24.825, 10.2) projected
  line L35 (2.6099, 16.8443) -> (8.4395, 12.7)
  line L36 (-11.1764, 30.6305) -> (-1.3265, 22.466)
  line L37 (-11.1689, 30.6232) -> (-9.3221, 30.4616) projected
  point P0 (0, 0)
extrude "Extrusion15" cut sketch "Sketch10" along normal mid plane 50 contours L11 L12 L13 L14 | L23 L22 L25 L26 L12 | L26 L29 L30 L12 | L19 L18 L21 L22 | L12 L30 L33 L34 | L15 L16 L17 L18
properties part number "Mirror Plate"
